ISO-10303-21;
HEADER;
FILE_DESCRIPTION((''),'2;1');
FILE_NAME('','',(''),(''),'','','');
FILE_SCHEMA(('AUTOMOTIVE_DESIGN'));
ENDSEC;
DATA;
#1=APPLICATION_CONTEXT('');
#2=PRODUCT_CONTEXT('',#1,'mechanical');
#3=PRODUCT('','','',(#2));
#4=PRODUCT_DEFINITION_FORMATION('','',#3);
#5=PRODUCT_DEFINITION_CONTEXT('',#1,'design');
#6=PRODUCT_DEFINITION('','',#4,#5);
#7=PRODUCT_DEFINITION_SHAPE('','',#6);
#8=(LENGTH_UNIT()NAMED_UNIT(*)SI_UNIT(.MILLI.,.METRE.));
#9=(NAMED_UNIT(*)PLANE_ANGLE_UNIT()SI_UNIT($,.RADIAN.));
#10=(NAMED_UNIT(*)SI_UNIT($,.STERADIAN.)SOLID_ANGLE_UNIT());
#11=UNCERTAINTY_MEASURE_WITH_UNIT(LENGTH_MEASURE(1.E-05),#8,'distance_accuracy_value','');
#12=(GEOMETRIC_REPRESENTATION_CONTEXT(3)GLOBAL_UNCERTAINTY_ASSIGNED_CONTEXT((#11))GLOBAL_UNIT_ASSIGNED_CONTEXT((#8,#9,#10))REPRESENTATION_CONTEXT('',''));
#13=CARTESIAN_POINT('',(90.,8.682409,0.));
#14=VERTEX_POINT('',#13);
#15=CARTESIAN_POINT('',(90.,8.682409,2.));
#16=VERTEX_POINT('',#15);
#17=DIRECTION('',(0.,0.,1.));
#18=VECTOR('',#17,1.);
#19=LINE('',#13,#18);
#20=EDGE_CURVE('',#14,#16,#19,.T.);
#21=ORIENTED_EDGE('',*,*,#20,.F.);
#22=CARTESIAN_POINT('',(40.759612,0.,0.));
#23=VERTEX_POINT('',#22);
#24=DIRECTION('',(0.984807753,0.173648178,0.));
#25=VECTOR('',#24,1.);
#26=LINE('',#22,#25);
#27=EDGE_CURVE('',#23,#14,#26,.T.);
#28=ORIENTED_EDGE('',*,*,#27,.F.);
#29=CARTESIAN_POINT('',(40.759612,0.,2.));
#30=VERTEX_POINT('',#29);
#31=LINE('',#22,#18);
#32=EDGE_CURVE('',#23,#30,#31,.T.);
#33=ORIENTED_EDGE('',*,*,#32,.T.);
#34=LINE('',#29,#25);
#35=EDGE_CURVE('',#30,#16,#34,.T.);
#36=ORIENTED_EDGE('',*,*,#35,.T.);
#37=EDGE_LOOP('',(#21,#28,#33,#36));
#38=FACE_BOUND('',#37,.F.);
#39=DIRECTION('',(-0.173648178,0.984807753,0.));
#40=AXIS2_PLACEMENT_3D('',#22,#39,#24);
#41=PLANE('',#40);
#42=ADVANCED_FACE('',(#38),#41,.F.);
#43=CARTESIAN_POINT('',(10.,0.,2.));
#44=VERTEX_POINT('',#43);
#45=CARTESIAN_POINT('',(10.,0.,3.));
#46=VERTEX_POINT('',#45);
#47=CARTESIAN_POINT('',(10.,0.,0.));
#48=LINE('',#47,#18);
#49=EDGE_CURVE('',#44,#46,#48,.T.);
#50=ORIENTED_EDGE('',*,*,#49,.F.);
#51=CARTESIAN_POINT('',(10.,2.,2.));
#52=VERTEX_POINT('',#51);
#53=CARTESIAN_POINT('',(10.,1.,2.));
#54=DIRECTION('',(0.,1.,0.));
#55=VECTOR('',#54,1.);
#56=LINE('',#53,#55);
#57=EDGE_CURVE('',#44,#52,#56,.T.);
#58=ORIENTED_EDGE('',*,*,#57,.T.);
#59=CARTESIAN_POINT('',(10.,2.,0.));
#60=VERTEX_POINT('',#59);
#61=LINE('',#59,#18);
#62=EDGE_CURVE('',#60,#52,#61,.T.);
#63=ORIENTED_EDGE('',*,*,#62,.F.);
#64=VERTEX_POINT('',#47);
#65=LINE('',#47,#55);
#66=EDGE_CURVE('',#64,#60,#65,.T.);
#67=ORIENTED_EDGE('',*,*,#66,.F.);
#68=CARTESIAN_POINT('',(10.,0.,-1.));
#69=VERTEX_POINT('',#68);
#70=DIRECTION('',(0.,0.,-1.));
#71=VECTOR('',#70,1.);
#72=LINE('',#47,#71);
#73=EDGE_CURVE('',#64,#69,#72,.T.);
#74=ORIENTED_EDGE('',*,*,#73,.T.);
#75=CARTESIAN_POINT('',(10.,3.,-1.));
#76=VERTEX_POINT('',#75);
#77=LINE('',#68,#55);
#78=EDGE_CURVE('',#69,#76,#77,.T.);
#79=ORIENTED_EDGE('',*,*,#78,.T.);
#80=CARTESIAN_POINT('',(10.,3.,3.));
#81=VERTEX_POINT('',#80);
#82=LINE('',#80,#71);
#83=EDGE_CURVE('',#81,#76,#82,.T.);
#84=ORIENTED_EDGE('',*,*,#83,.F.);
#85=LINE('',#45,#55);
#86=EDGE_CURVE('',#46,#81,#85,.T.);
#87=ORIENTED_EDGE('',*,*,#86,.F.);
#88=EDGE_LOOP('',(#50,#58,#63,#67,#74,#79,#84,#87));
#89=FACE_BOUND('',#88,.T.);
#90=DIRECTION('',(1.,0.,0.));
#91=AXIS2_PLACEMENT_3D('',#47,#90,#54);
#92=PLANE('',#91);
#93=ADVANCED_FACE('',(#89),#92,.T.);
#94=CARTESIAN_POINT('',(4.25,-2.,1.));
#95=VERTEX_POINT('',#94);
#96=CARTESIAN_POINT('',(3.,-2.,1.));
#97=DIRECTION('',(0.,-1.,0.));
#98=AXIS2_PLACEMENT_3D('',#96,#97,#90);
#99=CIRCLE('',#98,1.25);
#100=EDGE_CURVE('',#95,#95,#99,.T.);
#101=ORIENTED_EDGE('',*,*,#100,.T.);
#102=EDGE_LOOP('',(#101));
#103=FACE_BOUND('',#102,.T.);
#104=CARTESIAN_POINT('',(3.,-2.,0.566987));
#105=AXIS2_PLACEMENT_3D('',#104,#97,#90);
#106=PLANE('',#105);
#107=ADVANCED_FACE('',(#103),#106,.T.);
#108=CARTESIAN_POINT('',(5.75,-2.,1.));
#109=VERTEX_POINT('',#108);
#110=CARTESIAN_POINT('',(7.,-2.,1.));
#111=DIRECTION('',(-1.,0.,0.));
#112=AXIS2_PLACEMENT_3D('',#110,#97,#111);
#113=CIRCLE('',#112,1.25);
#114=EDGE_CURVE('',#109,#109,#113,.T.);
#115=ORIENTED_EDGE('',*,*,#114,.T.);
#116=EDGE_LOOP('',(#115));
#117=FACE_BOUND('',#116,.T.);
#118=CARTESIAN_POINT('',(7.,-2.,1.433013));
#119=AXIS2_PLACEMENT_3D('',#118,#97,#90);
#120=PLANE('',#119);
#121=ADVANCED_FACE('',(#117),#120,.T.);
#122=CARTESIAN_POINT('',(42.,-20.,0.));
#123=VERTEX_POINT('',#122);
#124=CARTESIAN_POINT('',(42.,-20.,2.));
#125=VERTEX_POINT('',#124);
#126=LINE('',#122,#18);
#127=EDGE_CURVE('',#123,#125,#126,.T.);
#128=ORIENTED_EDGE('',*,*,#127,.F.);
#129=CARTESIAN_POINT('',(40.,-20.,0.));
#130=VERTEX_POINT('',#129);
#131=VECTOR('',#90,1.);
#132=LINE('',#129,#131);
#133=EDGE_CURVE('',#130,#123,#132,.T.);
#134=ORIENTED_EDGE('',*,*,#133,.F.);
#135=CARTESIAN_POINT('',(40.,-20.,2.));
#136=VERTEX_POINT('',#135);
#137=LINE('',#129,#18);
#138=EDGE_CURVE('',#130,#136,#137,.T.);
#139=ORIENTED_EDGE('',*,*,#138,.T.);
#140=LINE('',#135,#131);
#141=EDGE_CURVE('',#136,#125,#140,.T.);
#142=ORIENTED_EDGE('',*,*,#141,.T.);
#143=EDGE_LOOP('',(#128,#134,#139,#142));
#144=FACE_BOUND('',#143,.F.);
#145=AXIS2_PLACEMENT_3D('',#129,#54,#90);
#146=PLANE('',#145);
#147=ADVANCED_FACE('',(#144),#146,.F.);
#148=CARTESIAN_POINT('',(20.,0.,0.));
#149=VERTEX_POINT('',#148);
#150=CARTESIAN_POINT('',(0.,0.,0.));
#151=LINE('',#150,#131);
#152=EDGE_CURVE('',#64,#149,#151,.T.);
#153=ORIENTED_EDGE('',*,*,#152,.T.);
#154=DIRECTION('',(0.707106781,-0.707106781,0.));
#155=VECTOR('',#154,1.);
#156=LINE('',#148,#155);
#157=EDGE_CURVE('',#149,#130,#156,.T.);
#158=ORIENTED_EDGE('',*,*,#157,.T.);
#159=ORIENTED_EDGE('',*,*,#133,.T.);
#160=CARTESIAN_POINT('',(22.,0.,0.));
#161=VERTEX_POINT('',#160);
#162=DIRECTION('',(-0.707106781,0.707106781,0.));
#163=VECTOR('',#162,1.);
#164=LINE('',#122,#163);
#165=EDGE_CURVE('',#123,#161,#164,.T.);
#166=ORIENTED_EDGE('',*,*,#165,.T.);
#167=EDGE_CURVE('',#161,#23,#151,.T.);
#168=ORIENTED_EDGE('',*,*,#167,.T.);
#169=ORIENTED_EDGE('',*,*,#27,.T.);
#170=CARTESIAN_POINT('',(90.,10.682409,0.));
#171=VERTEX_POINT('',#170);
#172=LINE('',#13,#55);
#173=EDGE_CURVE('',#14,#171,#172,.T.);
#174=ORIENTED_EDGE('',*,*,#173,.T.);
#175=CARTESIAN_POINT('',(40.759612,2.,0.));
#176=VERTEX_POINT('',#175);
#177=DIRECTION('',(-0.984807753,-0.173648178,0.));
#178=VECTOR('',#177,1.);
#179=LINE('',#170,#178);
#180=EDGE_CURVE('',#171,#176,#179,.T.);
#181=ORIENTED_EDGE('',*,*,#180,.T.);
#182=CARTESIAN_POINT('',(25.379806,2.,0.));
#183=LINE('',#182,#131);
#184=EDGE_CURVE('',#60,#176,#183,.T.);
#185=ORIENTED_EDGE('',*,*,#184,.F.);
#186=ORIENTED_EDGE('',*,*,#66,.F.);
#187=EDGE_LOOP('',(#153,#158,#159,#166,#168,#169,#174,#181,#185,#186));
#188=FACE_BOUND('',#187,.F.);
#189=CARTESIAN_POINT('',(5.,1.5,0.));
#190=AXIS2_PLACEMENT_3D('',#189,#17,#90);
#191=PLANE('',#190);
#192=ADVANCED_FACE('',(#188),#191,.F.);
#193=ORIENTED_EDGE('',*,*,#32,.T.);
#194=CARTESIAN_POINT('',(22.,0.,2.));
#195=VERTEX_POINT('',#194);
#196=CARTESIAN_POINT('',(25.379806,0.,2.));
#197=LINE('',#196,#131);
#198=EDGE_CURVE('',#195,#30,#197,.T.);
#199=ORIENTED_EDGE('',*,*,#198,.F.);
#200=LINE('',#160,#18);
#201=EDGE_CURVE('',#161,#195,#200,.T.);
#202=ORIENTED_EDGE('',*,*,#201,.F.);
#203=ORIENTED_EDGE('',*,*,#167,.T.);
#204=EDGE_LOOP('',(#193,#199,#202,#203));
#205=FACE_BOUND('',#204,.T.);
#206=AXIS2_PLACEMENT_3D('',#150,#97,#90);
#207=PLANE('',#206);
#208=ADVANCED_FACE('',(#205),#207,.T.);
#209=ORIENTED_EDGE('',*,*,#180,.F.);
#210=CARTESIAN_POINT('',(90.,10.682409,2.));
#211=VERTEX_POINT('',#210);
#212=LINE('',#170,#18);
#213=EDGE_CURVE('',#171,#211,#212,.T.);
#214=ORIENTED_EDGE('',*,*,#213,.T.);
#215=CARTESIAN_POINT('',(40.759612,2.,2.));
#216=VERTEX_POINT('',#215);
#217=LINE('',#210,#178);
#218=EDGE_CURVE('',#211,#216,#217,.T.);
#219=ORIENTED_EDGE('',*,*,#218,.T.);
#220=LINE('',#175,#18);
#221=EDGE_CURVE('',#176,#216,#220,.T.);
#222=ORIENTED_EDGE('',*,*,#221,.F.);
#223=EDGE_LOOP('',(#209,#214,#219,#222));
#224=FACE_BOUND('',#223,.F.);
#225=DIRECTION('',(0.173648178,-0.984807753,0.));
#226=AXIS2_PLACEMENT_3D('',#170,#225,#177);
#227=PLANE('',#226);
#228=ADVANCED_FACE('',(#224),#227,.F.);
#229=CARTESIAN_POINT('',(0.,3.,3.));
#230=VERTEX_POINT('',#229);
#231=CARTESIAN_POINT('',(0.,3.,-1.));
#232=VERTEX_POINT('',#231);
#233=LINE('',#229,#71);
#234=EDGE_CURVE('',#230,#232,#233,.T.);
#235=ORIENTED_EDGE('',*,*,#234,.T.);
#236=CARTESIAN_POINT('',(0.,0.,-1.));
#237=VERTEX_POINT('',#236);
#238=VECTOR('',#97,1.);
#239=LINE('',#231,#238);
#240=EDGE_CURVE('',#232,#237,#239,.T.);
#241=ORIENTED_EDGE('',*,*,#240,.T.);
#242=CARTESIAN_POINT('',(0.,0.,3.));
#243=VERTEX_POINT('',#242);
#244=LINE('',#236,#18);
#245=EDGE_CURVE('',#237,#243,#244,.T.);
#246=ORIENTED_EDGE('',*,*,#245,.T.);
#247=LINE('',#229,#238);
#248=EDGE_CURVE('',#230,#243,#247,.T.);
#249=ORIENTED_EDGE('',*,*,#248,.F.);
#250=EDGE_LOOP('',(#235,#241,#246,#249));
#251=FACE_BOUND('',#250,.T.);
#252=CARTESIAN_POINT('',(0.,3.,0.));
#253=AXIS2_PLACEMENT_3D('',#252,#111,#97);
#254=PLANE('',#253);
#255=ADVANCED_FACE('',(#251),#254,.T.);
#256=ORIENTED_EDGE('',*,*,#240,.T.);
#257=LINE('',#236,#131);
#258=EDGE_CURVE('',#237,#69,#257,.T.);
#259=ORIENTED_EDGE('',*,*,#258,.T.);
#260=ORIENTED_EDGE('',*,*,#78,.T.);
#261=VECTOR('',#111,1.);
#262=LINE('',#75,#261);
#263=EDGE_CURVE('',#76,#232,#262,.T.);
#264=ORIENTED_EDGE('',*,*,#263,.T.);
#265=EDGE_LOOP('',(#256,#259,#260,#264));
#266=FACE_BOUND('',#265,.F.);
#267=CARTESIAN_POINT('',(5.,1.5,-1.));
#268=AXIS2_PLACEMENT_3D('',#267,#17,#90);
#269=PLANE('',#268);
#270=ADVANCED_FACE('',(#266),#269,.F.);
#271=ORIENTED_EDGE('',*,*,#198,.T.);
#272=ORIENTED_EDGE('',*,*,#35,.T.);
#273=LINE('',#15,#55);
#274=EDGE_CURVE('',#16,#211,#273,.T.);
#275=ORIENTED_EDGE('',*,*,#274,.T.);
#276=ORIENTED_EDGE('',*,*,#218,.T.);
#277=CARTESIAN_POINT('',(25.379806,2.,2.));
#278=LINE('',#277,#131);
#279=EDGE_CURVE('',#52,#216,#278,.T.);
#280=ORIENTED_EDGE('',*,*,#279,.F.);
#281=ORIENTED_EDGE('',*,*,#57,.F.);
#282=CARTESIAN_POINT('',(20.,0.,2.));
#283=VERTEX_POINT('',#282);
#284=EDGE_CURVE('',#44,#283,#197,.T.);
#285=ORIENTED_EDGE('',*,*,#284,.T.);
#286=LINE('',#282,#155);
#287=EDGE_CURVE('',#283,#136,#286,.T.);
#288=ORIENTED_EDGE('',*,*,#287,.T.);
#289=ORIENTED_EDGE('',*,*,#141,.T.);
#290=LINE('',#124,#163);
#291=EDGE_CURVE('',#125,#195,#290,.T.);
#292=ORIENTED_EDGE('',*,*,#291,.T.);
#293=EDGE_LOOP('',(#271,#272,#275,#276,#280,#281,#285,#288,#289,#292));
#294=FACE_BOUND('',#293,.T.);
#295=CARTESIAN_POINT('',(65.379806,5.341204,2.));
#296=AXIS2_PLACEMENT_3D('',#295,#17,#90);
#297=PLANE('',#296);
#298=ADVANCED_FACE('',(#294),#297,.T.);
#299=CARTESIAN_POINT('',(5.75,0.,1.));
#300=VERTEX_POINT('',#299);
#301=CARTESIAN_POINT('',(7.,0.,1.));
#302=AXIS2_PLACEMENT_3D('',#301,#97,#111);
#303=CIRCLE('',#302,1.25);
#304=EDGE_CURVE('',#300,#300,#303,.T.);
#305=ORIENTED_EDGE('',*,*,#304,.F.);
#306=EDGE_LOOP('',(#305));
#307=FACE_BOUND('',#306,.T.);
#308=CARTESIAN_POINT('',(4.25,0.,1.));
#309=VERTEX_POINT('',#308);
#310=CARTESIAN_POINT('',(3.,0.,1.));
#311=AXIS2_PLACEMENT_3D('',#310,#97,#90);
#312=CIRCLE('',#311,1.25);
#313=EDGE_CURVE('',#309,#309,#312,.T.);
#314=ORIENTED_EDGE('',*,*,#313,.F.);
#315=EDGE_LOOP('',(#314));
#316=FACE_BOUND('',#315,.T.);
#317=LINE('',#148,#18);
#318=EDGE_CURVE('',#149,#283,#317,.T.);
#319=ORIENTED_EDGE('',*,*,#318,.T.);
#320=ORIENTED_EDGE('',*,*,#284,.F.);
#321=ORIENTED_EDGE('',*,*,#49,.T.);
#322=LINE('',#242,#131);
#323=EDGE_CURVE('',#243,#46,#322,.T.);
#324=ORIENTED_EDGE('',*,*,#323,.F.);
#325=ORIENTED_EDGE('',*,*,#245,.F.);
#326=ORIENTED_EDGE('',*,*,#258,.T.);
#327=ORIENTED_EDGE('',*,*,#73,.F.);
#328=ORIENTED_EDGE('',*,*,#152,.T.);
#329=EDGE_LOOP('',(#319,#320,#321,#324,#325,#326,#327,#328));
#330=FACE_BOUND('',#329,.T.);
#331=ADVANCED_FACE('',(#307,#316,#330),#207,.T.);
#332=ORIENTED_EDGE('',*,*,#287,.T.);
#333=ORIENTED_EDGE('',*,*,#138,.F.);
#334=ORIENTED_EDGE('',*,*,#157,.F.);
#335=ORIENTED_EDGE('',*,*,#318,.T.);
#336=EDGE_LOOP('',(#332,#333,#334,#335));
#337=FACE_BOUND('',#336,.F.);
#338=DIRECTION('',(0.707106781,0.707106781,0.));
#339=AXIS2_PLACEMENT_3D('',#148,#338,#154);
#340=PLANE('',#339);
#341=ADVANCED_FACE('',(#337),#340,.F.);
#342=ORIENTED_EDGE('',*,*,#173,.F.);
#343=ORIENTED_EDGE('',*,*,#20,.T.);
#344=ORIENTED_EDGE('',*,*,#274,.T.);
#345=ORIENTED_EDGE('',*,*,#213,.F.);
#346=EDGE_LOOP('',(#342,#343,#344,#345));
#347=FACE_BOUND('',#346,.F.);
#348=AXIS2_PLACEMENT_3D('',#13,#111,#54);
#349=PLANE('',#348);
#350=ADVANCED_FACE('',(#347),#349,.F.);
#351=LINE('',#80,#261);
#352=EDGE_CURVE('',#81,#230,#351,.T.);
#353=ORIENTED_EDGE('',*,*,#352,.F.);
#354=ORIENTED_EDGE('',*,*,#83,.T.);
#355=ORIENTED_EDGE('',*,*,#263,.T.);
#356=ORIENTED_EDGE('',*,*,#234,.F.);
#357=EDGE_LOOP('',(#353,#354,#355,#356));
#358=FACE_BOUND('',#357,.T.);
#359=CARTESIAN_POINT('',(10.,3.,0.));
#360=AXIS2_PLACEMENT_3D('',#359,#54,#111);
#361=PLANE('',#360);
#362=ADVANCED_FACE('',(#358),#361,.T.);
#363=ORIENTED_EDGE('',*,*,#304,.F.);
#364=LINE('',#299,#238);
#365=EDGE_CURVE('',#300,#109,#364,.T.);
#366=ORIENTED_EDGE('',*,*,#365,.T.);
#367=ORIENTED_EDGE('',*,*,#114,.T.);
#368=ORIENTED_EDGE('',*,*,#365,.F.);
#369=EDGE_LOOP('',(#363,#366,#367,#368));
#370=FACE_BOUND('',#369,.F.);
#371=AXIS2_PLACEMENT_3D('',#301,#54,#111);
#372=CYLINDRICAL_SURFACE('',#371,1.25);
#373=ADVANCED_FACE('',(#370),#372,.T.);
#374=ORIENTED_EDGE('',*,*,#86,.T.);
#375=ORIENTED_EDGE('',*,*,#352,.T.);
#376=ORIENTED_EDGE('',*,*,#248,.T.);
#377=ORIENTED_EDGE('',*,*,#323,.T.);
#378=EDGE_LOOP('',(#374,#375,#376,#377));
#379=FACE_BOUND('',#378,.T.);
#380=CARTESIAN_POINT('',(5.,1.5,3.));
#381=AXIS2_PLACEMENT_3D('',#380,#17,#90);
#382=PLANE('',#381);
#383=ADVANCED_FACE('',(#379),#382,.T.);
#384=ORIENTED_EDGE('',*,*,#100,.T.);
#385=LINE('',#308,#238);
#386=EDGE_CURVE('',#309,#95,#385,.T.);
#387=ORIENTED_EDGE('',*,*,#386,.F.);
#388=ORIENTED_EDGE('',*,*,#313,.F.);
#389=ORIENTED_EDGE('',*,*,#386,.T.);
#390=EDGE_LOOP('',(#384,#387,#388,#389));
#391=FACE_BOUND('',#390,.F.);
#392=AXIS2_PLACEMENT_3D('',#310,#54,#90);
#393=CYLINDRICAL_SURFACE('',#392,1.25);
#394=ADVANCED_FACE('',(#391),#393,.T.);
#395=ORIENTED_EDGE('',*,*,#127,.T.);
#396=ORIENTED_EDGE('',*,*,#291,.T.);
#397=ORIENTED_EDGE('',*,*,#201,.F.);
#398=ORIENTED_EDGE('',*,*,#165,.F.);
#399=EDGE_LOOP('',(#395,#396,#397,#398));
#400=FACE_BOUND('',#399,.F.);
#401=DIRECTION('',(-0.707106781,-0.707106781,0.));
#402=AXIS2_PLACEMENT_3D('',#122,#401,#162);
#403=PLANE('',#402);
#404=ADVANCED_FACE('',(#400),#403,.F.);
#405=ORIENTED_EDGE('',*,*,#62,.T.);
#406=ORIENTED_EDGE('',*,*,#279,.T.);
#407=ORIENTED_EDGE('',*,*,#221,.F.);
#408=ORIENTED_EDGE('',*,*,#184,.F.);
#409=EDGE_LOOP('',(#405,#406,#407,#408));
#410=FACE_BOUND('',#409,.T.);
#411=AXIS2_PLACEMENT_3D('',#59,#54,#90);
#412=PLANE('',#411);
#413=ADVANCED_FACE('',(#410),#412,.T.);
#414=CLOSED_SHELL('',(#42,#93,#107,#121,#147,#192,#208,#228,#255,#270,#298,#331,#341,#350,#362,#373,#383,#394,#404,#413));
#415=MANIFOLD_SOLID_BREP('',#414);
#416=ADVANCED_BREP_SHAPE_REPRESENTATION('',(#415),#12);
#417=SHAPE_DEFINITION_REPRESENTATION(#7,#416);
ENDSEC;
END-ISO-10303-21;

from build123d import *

# Parameters (mm, degrees)
F0_W          = 30.7596123494
F0_H          = 2
F1_DEPTH      = 2
F2_DEPTH      = 3
F2_DEPTH_BACK = 1
F4_DEPTH      = 2
F6_DEPTH      = 2


# Not quite as in the source:
# - a feature names something its author has since deleted; it is built from what else it names


with BuildPart() as f1:
    # F0 (on Top) → F1 (new body)
    with BuildSketch(Plane.XY):
        Polygon((40.7596123494, 2), (40.7596123494, 0), (90, 8.6824088833), (90, 10.6824088833), align=None)
        with Locations((25.3798061747, 1)):
            Rectangle(F0_W, F0_H)
    extrude(amount=F1_DEPTH)

    # F0 (on Top) → F2 (join, two sides)
    with BuildSketch(Plane.XY) as f2_sk:
        Polygon((0, 3), (0, 0), (10, 0), (10, 2), (10, 3), align=None)
    extrude(amount=F2_DEPTH)
    extrude(f2_sk.sketch, amount=-F2_DEPTH_BACK)

    # F3 (on face) → F4 (join)
    with BuildSketch(Plane.XZ):
        with BuildLine():
            ThreePointArc((1.75, 1), (3, -0.25), (4.25, 1))
            Line((4.25, 1), (1.75, 1))
        make_face()
        with BuildLine():
            Line((1.75, 1), (4.25, 1))
            ThreePointArc((4.25, 1), (3, 2.25), (1.75, 1))
        make_face()
        with BuildLine():
            ThreePointArc((8.25, 1), (7, 2.25), (5.75, 1))
            Line((5.75, 1), (8.25, 1))
        make_face()
        with BuildLine():
            Line((8.25, 1), (5.75, 1))
            ThreePointArc((5.75, 1), (7, -0.25), (8.25, 1))
        make_face()
    extrude(amount=F4_DEPTH)

    # F5 (on Top) → F6 (join)
    with BuildSketch(Plane.XY):
        Polygon((42, -20), (22, 0), (20, 0), (40, -20), align=None)
    extrude(amount=F6_DEPTH)


solid = f1.part
